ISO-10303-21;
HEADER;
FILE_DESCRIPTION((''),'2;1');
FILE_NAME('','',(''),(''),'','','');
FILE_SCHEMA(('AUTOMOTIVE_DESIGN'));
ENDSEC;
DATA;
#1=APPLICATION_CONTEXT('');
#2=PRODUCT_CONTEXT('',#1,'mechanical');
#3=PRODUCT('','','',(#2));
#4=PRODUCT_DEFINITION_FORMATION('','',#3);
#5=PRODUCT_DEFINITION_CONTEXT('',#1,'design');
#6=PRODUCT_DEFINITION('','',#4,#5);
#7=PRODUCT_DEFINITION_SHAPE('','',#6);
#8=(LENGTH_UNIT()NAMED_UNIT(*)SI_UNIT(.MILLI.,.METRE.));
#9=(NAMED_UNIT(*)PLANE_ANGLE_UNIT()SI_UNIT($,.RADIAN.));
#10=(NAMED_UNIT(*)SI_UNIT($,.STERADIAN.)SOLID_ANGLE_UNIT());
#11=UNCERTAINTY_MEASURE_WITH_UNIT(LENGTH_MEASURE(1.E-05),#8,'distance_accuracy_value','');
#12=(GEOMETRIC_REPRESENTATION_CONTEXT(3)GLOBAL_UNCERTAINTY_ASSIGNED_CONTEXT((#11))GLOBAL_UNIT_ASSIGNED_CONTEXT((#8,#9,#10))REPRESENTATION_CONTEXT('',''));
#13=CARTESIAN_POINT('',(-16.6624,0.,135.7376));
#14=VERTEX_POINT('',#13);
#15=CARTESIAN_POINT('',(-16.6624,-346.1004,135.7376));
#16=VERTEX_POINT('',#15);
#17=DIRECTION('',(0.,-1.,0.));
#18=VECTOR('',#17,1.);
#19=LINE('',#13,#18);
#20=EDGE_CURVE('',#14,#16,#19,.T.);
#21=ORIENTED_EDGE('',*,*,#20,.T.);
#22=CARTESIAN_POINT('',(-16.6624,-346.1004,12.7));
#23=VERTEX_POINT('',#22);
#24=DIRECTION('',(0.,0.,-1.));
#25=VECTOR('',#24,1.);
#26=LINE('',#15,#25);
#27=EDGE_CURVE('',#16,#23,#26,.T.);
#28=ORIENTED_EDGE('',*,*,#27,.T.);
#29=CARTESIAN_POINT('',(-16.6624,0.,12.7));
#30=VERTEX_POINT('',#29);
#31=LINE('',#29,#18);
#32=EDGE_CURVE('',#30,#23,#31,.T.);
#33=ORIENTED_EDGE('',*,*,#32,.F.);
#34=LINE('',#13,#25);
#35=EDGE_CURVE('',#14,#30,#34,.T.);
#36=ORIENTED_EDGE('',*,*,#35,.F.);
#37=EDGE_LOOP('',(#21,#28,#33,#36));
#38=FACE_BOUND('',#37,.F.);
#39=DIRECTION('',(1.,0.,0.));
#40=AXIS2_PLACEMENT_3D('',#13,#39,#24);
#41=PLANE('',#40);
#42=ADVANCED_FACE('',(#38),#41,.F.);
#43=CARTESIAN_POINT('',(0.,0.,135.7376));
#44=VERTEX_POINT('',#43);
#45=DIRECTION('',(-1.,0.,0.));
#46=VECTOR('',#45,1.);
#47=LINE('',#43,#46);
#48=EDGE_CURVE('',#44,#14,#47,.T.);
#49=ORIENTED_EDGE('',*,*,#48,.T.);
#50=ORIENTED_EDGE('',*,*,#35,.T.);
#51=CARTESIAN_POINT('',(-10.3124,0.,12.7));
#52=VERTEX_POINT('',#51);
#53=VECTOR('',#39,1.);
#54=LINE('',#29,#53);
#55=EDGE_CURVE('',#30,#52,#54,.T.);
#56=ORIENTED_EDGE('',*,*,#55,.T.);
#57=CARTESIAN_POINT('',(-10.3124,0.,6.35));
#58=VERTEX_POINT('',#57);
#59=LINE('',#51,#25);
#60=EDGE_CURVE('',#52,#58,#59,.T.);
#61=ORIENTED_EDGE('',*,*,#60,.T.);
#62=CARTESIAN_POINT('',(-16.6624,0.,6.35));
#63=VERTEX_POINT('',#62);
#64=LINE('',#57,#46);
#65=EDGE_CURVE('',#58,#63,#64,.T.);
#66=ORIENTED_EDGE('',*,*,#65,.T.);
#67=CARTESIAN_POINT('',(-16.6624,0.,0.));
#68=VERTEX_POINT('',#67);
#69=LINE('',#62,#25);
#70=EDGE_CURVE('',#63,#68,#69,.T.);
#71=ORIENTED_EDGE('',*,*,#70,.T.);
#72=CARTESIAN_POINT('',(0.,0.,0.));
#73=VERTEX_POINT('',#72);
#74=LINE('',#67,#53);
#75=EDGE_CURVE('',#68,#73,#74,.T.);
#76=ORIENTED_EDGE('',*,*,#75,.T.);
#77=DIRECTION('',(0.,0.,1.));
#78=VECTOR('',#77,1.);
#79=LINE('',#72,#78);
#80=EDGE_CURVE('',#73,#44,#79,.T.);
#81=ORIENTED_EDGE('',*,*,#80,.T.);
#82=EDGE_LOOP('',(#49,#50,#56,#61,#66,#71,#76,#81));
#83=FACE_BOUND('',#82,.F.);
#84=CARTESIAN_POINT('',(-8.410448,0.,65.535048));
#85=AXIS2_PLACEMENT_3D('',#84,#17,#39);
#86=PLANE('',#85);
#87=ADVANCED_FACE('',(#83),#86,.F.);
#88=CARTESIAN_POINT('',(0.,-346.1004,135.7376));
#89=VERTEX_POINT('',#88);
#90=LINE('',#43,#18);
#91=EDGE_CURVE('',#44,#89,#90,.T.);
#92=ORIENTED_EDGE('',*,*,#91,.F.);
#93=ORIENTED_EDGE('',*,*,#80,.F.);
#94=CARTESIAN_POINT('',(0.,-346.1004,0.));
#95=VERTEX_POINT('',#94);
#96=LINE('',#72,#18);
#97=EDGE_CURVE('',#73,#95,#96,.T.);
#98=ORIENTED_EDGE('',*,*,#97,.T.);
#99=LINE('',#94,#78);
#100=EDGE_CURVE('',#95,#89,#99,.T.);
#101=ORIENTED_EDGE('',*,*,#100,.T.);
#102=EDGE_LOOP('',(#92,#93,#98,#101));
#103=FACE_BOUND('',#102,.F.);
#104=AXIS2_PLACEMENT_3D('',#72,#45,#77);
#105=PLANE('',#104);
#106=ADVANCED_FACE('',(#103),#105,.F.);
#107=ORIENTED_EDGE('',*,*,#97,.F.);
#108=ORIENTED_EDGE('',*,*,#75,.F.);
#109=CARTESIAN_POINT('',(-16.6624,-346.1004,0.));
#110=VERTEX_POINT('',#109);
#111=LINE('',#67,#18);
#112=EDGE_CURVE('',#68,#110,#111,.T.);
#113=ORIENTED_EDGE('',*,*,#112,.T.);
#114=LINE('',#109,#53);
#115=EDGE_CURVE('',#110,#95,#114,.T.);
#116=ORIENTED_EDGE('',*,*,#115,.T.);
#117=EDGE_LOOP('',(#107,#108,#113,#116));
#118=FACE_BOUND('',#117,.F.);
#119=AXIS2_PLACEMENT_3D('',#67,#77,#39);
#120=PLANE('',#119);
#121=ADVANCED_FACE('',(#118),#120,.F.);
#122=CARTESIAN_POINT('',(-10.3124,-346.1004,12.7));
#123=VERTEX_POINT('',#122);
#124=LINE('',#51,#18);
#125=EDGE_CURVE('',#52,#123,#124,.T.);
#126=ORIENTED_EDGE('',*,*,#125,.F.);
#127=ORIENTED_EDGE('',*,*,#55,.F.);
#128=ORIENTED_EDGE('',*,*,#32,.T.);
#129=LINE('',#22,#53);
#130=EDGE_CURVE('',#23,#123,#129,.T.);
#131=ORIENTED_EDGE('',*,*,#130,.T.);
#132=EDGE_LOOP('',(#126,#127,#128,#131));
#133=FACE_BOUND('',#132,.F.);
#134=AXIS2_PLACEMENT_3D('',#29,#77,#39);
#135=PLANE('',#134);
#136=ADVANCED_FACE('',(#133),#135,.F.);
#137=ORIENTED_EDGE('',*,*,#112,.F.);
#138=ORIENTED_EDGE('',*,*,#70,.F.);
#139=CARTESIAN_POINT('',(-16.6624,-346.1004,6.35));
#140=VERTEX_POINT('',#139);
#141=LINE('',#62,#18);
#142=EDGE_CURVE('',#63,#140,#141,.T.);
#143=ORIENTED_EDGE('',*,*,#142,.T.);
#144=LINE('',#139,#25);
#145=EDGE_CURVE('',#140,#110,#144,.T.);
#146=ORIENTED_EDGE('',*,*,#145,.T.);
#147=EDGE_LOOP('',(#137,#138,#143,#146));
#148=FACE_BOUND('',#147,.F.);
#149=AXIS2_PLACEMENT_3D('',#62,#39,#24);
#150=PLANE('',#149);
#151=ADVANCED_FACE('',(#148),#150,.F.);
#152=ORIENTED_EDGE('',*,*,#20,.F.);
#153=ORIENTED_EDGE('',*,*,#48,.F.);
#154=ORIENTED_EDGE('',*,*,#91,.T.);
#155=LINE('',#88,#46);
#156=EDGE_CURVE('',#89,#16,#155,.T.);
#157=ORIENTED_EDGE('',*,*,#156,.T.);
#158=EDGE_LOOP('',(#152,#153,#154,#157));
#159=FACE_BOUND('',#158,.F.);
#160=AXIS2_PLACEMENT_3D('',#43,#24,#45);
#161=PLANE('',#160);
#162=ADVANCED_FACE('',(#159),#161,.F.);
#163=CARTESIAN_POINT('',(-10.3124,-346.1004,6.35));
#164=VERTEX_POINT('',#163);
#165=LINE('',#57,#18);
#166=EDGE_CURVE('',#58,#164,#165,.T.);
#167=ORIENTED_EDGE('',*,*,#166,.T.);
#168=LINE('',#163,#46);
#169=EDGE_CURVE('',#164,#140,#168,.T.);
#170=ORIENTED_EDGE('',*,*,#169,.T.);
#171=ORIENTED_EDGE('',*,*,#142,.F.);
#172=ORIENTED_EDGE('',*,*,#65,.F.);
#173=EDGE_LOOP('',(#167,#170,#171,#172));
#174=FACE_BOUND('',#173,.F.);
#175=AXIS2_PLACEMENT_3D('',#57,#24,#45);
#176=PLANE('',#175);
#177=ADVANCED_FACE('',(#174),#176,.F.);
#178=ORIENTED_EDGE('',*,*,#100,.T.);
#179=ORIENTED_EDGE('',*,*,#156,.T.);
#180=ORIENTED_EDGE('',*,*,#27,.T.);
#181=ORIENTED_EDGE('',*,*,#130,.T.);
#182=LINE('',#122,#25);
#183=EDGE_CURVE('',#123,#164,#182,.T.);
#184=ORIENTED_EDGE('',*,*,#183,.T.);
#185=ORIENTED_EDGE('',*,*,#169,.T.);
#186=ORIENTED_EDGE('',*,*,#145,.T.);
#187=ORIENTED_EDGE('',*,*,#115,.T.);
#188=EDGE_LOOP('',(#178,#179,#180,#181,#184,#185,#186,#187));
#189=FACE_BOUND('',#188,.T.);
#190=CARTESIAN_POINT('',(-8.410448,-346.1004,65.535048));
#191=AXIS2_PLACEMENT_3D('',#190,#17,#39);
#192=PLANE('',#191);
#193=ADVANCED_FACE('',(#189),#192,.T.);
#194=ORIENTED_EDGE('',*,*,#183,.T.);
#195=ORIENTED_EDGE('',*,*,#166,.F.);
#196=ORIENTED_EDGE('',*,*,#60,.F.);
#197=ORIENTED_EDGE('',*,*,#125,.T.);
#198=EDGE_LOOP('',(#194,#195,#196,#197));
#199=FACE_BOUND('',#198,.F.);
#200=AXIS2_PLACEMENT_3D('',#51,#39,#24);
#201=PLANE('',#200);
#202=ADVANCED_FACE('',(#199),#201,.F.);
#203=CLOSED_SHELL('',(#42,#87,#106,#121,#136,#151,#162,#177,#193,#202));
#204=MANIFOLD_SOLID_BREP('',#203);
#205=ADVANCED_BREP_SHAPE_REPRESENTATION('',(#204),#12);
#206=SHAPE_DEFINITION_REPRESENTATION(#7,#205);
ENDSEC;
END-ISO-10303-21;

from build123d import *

# Parameters (mm, degrees)
F4_DEPTH = 346.1004


# Not quite as in the source:
# - a variable given as a bare number and used for a length is read in inches; the dataset says mm whatever the document's units were


with BuildPart() as f4:
    # F3 (on Front) → F4 (new body)
    with BuildSketch(Plane.XZ):
        Polygon((-16.6624, 0), (0, 0), (0, 135.7376), (-16.6624, 135.7376), (-16.6624, 12.7), (-10.3124, 12.7), (-10.3124, 6.35), (-16.6624, 6.35), align=None)
    extrude(amount=F4_DEPTH)


solid = f4.part
